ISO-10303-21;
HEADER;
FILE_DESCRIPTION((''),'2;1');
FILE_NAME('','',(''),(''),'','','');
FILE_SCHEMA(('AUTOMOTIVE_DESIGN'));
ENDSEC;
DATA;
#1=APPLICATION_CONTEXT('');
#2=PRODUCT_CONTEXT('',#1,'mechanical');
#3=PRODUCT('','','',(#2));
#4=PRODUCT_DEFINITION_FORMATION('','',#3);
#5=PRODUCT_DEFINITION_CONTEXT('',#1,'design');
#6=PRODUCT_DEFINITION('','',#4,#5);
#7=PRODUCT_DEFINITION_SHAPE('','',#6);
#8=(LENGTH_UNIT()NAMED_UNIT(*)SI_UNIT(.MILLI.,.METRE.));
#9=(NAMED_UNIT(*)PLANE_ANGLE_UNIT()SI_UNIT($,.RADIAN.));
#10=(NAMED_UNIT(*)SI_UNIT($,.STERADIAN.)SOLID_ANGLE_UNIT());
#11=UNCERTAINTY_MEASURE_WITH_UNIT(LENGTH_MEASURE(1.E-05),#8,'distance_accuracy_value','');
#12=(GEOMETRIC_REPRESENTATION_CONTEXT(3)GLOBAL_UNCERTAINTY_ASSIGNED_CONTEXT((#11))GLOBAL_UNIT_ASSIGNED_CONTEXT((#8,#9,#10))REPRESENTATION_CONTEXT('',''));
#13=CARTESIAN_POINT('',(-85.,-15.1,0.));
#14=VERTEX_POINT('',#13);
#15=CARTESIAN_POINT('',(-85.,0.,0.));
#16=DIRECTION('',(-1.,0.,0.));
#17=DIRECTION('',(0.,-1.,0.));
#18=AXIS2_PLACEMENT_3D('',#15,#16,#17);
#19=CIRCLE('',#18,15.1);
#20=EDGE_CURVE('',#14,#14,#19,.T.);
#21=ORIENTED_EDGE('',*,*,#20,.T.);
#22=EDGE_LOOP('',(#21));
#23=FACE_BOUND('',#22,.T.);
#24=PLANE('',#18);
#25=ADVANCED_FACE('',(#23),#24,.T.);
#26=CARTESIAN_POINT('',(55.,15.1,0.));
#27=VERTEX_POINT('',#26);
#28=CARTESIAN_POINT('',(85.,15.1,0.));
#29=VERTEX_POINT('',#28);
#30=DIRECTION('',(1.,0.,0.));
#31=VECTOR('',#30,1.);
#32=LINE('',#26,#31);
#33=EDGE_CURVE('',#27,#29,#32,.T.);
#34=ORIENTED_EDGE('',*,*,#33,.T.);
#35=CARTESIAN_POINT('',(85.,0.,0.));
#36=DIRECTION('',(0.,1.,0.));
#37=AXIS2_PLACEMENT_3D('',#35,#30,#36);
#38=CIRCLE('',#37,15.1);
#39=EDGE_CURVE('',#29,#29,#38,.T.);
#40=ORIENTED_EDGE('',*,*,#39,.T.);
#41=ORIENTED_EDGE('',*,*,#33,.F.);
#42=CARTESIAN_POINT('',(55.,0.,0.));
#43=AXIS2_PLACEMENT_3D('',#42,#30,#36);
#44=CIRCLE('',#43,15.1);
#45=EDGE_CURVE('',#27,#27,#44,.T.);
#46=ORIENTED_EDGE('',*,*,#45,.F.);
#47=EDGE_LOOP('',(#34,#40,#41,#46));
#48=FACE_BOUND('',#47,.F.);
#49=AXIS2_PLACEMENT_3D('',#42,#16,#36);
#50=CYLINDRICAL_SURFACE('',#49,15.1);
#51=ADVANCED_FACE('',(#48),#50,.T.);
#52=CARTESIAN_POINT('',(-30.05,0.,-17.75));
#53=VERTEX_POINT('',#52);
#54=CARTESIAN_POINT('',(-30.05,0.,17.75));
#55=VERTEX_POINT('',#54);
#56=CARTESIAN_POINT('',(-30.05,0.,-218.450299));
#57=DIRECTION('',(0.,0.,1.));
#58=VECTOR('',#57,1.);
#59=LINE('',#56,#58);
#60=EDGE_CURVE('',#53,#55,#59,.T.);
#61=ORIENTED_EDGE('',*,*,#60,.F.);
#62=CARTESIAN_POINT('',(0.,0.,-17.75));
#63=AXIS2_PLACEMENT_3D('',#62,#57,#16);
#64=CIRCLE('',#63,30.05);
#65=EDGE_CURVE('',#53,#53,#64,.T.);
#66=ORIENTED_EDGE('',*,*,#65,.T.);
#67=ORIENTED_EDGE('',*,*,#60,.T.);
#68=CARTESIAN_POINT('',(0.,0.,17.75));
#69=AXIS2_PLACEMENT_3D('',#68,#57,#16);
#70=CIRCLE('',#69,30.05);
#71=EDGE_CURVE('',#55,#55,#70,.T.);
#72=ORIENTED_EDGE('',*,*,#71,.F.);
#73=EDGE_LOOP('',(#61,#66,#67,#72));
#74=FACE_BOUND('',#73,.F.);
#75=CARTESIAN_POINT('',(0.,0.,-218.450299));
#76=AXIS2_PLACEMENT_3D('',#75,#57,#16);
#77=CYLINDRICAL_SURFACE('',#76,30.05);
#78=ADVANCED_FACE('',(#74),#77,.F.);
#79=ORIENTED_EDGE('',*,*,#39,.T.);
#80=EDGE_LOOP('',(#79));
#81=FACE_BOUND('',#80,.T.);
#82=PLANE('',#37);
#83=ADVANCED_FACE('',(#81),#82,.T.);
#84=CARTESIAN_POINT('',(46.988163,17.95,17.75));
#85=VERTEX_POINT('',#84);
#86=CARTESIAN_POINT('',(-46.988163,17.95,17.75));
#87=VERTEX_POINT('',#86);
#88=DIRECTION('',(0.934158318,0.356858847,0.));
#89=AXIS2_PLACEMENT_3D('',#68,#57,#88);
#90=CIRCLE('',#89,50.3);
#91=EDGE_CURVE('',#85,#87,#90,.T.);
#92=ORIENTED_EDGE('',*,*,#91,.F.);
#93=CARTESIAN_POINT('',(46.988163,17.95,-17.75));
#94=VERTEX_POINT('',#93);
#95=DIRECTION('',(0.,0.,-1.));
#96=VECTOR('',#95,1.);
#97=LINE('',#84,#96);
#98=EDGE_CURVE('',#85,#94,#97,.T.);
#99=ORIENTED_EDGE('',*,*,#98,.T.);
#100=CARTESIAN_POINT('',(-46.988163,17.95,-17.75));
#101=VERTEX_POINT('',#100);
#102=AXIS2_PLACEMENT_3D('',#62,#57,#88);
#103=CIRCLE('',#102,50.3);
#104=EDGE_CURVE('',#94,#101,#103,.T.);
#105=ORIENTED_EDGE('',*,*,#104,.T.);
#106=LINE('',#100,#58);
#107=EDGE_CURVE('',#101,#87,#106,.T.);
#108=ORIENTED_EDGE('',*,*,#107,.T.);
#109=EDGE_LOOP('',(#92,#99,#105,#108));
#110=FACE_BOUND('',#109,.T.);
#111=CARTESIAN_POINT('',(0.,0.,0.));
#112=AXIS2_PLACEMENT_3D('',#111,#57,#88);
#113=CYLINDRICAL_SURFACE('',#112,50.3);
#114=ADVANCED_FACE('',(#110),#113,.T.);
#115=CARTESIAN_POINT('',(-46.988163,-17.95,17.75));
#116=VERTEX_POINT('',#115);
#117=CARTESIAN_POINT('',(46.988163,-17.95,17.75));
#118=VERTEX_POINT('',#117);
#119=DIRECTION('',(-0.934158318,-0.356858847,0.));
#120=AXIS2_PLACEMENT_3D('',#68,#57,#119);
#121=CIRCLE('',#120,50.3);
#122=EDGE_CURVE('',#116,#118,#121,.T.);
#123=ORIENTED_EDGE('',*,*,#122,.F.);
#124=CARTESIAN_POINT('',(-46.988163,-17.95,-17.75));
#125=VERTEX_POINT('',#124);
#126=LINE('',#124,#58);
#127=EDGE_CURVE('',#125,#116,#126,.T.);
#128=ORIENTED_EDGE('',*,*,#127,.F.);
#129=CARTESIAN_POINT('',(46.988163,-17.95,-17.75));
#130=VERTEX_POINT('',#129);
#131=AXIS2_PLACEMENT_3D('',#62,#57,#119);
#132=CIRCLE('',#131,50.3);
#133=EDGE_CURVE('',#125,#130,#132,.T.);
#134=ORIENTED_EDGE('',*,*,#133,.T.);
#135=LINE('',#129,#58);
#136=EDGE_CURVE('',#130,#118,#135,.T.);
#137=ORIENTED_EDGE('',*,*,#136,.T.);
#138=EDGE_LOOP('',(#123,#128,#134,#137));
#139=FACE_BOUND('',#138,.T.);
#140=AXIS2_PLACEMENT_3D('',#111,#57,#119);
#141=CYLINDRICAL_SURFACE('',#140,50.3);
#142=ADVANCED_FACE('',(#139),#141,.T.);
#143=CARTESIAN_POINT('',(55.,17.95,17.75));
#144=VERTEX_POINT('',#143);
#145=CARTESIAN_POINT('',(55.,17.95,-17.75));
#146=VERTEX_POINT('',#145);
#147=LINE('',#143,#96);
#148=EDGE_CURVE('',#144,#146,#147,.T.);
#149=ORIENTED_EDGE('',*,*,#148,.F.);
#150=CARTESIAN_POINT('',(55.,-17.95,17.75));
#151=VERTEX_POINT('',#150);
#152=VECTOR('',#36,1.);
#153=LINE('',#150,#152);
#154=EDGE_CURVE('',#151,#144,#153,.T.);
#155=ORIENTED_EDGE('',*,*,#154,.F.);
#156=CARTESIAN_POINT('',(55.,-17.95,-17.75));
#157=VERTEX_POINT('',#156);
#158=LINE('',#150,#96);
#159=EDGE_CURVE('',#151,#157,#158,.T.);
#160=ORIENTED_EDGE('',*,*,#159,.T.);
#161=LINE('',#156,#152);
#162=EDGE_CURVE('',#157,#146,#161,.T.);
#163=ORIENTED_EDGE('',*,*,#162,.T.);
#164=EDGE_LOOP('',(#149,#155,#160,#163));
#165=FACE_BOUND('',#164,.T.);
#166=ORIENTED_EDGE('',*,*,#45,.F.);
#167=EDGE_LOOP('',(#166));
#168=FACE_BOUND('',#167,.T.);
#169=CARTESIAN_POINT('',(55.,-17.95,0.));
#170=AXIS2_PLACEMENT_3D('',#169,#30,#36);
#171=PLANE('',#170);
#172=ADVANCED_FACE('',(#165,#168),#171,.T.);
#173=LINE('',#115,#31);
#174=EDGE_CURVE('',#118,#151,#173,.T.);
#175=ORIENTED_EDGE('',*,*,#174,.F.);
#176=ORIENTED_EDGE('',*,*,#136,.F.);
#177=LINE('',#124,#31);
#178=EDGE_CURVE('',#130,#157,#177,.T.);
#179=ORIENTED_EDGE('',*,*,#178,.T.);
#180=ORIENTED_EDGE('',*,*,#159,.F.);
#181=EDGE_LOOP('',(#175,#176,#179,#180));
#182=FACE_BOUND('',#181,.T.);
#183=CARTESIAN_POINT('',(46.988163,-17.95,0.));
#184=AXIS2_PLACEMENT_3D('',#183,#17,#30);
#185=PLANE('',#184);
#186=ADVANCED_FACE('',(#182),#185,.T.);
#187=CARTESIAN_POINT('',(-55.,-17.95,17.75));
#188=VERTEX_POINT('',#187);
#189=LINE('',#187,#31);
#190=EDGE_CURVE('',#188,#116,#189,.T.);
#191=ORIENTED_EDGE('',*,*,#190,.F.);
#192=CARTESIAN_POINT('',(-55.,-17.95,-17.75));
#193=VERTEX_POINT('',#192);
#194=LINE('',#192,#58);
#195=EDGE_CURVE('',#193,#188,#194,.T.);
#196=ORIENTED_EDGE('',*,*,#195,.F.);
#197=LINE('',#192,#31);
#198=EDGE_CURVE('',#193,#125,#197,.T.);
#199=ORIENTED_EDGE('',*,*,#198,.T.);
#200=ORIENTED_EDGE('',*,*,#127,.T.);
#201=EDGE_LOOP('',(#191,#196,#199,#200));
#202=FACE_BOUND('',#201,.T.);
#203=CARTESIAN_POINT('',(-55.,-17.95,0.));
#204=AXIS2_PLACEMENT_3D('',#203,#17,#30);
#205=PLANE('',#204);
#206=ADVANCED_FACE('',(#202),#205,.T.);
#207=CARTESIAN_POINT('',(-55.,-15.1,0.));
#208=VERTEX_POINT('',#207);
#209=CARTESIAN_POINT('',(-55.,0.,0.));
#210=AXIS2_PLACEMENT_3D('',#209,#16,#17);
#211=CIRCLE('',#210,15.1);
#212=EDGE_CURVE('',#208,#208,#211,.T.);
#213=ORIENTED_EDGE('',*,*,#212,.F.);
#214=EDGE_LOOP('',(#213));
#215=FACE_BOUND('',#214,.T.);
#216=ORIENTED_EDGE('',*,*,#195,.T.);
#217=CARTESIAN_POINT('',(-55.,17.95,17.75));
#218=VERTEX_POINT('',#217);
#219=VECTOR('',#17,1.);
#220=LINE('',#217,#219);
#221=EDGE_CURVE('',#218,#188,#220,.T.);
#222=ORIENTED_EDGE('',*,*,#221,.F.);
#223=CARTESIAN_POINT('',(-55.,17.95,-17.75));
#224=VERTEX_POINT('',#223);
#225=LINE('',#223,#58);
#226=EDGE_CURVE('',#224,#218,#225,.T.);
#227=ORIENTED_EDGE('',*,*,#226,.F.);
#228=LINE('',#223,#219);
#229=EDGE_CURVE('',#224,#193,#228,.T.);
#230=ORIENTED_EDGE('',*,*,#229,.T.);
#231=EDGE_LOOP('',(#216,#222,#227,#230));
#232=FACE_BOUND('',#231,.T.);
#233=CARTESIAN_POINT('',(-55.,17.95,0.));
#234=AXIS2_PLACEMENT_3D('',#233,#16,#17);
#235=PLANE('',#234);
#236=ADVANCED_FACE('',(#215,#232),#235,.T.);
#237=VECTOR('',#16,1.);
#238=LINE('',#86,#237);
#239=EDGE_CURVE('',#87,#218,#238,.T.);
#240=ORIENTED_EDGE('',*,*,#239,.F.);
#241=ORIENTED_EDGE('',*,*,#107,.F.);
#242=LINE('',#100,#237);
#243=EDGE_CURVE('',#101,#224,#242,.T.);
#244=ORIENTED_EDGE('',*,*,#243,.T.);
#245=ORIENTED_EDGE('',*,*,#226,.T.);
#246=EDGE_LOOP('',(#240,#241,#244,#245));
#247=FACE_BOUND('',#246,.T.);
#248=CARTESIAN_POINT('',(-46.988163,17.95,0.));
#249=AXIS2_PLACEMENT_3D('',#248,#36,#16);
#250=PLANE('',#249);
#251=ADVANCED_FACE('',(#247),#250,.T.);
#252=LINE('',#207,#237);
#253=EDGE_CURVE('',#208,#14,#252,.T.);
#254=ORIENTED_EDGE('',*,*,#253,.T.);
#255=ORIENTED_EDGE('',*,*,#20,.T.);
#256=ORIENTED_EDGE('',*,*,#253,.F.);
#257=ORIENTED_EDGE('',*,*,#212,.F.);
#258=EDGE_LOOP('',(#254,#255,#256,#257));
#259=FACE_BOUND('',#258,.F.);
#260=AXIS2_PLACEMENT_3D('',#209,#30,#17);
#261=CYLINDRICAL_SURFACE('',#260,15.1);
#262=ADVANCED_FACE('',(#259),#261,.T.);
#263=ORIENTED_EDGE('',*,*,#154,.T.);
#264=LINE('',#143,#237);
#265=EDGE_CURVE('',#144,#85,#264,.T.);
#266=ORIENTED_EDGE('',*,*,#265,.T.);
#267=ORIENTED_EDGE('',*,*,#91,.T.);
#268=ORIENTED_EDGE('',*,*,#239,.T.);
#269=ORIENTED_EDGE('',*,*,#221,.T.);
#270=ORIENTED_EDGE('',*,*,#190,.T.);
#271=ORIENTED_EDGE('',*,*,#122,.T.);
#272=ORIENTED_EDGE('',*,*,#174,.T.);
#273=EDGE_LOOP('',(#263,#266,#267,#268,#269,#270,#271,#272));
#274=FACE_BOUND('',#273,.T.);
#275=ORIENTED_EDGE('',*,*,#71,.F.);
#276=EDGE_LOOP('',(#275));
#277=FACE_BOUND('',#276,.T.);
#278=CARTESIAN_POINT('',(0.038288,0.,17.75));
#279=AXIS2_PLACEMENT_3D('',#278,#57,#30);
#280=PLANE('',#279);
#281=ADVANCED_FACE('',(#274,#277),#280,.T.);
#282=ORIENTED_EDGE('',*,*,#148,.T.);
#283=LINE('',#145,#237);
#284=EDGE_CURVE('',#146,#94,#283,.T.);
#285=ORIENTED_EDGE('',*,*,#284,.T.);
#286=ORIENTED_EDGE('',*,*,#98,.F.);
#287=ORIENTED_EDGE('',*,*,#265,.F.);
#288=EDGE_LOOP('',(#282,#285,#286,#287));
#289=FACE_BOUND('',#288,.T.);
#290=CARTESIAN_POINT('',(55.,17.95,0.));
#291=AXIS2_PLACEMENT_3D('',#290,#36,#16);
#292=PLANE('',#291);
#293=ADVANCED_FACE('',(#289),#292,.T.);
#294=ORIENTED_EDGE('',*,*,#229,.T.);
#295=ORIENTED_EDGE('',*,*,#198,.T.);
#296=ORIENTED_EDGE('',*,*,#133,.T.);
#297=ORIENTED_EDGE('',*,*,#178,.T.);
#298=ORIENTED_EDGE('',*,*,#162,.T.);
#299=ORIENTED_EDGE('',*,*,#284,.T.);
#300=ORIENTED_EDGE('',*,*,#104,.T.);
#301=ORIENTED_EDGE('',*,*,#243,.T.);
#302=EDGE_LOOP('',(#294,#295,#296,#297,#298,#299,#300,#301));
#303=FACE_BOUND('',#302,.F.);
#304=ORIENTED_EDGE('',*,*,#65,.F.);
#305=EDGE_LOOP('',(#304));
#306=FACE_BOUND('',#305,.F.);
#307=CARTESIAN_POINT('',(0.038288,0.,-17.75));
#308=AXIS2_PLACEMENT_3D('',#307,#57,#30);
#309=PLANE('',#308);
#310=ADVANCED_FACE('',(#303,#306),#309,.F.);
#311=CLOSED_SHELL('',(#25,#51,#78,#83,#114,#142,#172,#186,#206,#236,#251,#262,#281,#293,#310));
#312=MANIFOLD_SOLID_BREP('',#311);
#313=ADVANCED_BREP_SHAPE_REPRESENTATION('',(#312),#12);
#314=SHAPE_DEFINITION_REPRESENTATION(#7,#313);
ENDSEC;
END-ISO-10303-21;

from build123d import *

# Parameters (mm, degrees)
F1_DEPTH = 17.75
F3_R     = 15.1
F4_DEPTH = 30
F6_R     = 15.1
F7_DEPTH = 30
F10_D    = 60.1


with BuildPart() as f1:
    # F0 (on Top) → F1 (new body, symmetric)
    with BuildSketch(Plane.XY):
        with BuildLine():
            ThreePointArc((46.9881634031, -17.95), (49.4651120446, -9.1264829157), (50.3, 0))
            ThreePointArc((50.3, 0), (49.4651120446, 9.1264829157), (46.9881634031, 17.95))
            Line((46.9881634031, 17.95), (-46.9881634031, 17.95))
            ThreePointArc((-46.9881634031, 17.95), (-50.3, 0), (-46.9881634031, -17.95))
            Line((-46.9881634031, -17.95), (46.9881634031, -17.95))
        make_face()
        with BuildLine():
            Line((-46.9881634031, 17.95), (46.9881634031, 17.95))
            ThreePointArc((46.9881634031, 17.95), (0, 50.3), (-46.9881634031, 17.95))
        make_face()
        with BuildLine():
            ThreePointArc((46.9881634031, 17.95), (49.4651120446, 9.1264829157), (50.3, 0))
            ThreePointArc((50.3, 0), (49.4651120446, -9.1264829157), (46.9881634031, -17.95))
            Line((46.9881634031, -17.95), (55, -17.95))
            Line((55, -17.95), (55, 17.95))
            Line((55, 17.95), (46.9881634031, 17.95))
        make_face()
        with BuildLine():
            ThreePointArc((-46.9881634031, -17.95), (0, -50.3), (46.9881634031, -17.95))
            Line((46.9881634031, -17.95), (-46.9881634031, -17.95))
        make_face()
        with BuildLine():
            ThreePointArc((-46.9881634031, -17.95), (-50.3, 0), (-46.9881634031, 17.95))
            Line((-46.9881634031, 17.95), (-55, 17.95))
            Line((-55, 17.95), (-55, -17.95))
            Line((-55, -17.95), (-46.9881634031, -17.95))
        make_face()
    extrude(amount=F1_DEPTH, both=True)

    # F3 (on offset) → F4 (join)
    with BuildSketch(Plane.YZ.offset(55)):
        Circle(F3_R)
    extrude(amount=F4_DEPTH)

    # F6 (on offset) → F7 (join)
    with BuildSketch(Plane(origin=(-55, 0, 0), x_dir=(0, -1, 0), z_dir=(-1, 0, 0))):
        Circle(F6_R)
    extrude(amount=F7_DEPTH)

    # F10 (through all)
    with Locations(Plane(origin=(0, 0, -17.75), x_dir=(1, 0, 0), z_dir=(0, 0, -1))):
        with Locations((0, 0)):
            Hole(F10_D / 2)


solid = f1.part
